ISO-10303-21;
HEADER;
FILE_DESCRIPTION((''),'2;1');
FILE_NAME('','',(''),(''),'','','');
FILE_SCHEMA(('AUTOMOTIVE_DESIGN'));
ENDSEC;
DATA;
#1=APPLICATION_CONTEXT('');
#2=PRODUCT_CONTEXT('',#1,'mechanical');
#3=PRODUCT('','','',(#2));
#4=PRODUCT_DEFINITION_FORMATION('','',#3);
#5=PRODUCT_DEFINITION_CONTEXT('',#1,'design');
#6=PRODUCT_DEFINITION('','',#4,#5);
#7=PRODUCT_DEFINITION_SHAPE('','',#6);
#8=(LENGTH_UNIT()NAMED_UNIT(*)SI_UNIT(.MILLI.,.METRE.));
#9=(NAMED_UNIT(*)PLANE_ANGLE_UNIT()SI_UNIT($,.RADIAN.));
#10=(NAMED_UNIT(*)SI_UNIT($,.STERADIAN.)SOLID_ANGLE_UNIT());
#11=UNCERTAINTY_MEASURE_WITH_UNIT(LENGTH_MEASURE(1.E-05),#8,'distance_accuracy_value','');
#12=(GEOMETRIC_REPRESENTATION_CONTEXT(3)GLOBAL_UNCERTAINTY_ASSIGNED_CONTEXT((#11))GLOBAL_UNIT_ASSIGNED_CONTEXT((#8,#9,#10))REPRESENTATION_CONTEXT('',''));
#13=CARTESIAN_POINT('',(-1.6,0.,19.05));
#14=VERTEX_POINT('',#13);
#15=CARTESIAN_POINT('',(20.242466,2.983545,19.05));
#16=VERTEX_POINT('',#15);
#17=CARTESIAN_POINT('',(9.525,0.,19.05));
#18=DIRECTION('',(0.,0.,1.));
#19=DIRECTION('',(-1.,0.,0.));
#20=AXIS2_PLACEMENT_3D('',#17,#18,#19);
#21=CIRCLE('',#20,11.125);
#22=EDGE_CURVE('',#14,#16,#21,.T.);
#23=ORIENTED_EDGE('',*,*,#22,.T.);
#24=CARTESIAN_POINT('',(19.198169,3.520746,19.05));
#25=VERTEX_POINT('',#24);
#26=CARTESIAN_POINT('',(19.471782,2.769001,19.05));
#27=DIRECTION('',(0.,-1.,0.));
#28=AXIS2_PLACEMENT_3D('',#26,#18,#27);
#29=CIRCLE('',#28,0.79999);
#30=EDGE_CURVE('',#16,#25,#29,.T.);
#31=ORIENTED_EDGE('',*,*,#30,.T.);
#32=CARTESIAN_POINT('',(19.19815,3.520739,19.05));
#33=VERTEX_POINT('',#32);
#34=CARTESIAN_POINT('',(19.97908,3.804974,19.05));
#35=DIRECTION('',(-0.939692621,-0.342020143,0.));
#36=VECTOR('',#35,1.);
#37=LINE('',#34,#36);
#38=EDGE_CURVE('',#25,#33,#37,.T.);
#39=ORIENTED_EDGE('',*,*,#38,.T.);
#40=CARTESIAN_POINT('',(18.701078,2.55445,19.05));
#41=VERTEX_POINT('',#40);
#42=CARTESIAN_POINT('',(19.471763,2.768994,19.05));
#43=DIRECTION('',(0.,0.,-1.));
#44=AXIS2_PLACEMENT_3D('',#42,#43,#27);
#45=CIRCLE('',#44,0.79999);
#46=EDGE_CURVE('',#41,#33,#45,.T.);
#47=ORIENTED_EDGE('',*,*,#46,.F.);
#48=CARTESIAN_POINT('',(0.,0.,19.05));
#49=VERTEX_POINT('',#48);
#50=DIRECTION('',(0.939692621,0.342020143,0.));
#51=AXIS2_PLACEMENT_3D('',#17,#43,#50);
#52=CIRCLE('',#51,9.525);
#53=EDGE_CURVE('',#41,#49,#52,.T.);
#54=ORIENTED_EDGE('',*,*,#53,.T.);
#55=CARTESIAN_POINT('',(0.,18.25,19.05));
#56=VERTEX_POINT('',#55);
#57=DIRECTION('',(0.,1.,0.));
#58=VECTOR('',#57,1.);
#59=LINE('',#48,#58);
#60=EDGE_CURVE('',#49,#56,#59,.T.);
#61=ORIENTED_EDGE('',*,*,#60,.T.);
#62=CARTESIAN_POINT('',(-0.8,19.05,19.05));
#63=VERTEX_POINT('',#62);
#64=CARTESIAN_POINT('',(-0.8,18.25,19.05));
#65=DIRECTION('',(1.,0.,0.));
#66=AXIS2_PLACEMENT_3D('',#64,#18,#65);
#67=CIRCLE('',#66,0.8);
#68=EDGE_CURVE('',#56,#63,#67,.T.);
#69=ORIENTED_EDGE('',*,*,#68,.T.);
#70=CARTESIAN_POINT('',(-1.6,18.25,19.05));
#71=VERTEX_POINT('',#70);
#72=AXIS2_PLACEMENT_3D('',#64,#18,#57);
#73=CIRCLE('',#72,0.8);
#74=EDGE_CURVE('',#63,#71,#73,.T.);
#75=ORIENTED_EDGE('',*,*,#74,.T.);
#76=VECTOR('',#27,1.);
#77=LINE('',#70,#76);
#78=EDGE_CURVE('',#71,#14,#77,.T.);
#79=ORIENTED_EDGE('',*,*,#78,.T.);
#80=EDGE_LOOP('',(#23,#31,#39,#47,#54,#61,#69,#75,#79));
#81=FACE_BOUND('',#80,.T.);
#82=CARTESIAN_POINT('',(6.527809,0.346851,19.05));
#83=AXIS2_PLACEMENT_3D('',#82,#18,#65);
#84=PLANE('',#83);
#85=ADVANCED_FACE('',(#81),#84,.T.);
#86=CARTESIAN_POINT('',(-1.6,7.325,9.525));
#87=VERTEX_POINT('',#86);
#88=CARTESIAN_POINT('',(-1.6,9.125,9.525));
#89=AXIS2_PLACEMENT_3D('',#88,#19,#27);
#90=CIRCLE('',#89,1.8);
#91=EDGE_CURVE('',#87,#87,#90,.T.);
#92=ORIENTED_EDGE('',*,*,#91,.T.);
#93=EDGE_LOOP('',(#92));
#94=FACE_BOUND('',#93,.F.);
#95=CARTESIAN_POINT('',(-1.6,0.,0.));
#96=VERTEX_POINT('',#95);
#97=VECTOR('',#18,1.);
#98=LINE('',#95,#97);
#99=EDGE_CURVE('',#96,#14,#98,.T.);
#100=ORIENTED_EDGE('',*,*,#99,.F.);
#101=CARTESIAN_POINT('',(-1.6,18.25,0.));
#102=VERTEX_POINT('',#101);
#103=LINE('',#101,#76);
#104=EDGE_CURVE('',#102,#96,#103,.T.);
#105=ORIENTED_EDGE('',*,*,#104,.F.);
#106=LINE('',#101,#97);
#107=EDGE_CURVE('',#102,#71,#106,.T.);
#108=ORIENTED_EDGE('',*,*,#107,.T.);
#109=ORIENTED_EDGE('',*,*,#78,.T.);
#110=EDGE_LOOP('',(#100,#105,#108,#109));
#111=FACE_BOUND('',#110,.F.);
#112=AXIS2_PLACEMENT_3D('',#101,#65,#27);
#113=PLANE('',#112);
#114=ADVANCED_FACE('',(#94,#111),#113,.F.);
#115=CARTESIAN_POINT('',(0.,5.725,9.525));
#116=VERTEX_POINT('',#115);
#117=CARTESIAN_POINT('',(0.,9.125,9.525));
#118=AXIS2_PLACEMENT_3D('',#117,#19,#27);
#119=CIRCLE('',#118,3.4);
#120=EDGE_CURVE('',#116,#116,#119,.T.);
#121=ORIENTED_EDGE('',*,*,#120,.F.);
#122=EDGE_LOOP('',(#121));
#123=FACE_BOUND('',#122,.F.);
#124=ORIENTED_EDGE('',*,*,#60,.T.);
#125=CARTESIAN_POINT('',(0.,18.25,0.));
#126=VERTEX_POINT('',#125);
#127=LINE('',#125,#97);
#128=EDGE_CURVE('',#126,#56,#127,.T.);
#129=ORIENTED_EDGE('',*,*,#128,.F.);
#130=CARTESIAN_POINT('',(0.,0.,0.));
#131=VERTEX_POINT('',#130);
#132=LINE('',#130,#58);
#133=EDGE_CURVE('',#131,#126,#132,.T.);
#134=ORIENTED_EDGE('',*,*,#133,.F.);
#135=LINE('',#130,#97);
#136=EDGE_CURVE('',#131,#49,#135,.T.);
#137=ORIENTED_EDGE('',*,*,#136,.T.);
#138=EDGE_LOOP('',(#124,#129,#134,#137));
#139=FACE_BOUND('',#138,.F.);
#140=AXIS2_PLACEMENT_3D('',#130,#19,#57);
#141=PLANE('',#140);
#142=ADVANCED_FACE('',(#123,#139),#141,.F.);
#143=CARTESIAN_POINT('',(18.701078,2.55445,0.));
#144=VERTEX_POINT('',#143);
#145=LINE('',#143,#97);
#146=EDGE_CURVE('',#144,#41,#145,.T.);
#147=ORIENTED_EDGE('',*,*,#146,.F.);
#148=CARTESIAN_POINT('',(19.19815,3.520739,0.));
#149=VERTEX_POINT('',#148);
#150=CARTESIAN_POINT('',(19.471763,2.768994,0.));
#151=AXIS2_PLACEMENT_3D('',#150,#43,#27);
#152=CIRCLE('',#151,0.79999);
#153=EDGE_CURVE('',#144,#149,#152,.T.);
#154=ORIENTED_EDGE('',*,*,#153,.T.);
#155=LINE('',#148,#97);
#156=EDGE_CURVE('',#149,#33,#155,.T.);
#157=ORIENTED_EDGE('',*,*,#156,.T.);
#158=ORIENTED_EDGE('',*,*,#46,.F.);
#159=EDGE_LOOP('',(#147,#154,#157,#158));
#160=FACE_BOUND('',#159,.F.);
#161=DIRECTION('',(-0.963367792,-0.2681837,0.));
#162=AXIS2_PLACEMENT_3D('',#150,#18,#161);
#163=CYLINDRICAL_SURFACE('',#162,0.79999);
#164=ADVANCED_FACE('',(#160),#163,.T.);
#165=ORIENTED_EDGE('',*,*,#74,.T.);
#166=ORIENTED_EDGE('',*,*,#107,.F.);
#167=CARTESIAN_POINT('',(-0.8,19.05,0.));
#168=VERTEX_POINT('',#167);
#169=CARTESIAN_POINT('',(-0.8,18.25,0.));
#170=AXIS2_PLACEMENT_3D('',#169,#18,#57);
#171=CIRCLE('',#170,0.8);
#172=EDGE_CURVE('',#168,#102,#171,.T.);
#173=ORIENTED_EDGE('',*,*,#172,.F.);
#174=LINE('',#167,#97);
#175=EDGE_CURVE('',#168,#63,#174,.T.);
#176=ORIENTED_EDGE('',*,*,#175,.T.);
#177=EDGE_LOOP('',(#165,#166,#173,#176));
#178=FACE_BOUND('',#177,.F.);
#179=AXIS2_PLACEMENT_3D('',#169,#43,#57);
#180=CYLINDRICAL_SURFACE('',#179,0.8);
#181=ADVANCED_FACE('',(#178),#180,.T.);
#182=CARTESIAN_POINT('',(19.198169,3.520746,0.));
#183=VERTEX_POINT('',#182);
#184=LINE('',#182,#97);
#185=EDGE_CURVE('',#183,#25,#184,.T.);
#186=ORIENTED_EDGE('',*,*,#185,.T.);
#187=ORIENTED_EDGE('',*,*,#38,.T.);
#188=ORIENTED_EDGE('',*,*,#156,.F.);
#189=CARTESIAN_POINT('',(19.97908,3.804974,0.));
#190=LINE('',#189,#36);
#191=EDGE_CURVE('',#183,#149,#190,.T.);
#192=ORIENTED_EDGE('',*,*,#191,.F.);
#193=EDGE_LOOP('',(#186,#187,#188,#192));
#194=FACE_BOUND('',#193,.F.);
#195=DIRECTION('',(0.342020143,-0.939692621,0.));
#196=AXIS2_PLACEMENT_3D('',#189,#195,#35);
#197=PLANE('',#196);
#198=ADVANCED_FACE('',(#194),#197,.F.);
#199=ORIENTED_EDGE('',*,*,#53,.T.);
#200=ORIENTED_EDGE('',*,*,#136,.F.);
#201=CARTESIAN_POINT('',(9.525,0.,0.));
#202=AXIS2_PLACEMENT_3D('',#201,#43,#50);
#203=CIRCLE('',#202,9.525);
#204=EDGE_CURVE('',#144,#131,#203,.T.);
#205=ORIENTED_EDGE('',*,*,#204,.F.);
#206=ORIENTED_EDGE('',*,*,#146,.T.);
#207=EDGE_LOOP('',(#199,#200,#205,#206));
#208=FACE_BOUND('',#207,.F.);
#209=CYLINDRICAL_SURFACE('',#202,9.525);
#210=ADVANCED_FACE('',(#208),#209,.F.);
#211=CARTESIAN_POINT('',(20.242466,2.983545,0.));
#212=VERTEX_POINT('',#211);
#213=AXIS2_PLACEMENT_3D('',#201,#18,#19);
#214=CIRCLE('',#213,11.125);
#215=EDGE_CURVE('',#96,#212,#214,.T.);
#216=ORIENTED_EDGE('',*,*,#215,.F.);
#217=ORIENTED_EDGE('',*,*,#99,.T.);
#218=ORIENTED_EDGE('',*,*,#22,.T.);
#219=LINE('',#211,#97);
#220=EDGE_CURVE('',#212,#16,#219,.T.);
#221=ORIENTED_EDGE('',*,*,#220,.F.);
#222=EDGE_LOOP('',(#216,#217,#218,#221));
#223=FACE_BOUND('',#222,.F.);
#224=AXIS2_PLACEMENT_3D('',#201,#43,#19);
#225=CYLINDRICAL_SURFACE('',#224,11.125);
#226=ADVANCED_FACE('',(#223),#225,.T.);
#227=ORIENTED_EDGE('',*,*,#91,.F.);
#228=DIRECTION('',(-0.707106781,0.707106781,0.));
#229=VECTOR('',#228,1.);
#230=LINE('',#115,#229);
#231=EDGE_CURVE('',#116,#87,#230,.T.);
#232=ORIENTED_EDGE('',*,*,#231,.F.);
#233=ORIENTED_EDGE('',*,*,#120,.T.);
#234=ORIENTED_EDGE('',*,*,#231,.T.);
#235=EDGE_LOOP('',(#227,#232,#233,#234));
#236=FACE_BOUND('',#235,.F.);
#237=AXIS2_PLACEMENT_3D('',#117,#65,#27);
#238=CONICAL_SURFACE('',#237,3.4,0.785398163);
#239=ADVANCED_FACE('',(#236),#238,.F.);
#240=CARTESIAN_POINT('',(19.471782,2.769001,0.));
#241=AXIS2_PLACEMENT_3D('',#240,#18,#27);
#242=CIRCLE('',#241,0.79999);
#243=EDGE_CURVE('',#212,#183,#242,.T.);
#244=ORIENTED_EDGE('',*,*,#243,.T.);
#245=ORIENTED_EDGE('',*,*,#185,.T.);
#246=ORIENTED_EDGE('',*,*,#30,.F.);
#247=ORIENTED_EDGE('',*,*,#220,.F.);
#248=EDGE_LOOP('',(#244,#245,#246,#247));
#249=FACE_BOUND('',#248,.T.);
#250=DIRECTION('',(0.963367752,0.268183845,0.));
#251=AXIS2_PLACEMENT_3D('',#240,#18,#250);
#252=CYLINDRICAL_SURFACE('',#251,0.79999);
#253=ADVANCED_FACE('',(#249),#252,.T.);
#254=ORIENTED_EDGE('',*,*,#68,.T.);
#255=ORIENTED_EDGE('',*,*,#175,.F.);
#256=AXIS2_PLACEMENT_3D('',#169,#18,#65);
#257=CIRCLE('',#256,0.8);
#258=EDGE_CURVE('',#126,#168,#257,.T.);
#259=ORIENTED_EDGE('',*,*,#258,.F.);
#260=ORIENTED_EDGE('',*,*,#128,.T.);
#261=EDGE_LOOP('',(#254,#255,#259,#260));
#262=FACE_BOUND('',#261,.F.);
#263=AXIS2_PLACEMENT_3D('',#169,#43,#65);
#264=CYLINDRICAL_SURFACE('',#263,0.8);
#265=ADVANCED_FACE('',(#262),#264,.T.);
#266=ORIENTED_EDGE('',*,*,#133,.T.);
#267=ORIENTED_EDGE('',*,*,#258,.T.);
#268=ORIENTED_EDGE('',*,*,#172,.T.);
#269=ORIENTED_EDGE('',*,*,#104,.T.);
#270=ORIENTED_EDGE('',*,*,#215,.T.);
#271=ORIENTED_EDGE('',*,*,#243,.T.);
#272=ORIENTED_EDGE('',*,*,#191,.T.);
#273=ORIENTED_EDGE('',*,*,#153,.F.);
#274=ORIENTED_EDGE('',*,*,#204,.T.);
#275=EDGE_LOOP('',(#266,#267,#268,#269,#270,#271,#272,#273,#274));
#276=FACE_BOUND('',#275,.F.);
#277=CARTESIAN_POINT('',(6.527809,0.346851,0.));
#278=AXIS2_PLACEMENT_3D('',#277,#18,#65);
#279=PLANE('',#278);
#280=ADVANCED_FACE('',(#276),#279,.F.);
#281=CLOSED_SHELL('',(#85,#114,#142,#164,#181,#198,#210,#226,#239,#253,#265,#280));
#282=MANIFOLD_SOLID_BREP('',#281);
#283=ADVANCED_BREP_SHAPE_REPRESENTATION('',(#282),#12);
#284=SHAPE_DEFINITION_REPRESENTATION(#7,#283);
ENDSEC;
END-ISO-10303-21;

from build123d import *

# Parameters (mm, degrees)
F1_DEPTH       = 19.05
F2_R           = 0.79999
F4_D           = 3.4
F4_CSINK_D     = 6.8
F4_CSINK_ANGLE = 90


# Not quite as in the source:
# - a fillet or chamfer is up to 0.001 mm smaller than in the source, because OpenCascade refuses the exact size


with BuildPart() as f1:
    # F0 (on Top) → F1 (new body)
    with BuildSketch(Plane.XY):
        with BuildLine():
            ThreePointArc((18.475572213, 3.2577418652), (11.1789988923, -9.3802938474), (0, 0))
            Line((0, 0), (0, 18.25))
            ThreePointArc((0, 18.25), (-0.2343145751, 18.8156854249), (-0.8, 19.05))
            ThreePointArc((-0.8, 19.05), (-1.3656854249, 18.8156854249), (-1.6, 18.25))
            Line((-1.6, 18.25), (-1.6, 0))
            ThreePointArc((-1.6, 0), (11.4568359765, -10.9559862523), (19.9790804062, 3.8049740945))
            Line((19.9790804062, 3.8049740945), (18.475572213, 3.2577418652))
        make_face()
    extrude(amount=F1_DEPTH)

    # F2 (radius 0.8 in the source; OpenCascade refuses exactly that, so slightly less here)
    f2_edges = [f1.edges().sort_by_distance(p)[0] for p in [
        (19.97908, 3.804974, 9.525),
        (18.475572, 3.257742, 9.525),
    ]]
    fillet(f2_edges, radius=F2_R)

    # F4 (through all)
    with Locations(Plane.YZ):
        with Locations((9.125, 9.525)):
            CounterSinkHole(F4_D / 2, F4_CSINK_D / 2, counter_sink_angle=F4_CSINK_ANGLE)


solid = f1.part
